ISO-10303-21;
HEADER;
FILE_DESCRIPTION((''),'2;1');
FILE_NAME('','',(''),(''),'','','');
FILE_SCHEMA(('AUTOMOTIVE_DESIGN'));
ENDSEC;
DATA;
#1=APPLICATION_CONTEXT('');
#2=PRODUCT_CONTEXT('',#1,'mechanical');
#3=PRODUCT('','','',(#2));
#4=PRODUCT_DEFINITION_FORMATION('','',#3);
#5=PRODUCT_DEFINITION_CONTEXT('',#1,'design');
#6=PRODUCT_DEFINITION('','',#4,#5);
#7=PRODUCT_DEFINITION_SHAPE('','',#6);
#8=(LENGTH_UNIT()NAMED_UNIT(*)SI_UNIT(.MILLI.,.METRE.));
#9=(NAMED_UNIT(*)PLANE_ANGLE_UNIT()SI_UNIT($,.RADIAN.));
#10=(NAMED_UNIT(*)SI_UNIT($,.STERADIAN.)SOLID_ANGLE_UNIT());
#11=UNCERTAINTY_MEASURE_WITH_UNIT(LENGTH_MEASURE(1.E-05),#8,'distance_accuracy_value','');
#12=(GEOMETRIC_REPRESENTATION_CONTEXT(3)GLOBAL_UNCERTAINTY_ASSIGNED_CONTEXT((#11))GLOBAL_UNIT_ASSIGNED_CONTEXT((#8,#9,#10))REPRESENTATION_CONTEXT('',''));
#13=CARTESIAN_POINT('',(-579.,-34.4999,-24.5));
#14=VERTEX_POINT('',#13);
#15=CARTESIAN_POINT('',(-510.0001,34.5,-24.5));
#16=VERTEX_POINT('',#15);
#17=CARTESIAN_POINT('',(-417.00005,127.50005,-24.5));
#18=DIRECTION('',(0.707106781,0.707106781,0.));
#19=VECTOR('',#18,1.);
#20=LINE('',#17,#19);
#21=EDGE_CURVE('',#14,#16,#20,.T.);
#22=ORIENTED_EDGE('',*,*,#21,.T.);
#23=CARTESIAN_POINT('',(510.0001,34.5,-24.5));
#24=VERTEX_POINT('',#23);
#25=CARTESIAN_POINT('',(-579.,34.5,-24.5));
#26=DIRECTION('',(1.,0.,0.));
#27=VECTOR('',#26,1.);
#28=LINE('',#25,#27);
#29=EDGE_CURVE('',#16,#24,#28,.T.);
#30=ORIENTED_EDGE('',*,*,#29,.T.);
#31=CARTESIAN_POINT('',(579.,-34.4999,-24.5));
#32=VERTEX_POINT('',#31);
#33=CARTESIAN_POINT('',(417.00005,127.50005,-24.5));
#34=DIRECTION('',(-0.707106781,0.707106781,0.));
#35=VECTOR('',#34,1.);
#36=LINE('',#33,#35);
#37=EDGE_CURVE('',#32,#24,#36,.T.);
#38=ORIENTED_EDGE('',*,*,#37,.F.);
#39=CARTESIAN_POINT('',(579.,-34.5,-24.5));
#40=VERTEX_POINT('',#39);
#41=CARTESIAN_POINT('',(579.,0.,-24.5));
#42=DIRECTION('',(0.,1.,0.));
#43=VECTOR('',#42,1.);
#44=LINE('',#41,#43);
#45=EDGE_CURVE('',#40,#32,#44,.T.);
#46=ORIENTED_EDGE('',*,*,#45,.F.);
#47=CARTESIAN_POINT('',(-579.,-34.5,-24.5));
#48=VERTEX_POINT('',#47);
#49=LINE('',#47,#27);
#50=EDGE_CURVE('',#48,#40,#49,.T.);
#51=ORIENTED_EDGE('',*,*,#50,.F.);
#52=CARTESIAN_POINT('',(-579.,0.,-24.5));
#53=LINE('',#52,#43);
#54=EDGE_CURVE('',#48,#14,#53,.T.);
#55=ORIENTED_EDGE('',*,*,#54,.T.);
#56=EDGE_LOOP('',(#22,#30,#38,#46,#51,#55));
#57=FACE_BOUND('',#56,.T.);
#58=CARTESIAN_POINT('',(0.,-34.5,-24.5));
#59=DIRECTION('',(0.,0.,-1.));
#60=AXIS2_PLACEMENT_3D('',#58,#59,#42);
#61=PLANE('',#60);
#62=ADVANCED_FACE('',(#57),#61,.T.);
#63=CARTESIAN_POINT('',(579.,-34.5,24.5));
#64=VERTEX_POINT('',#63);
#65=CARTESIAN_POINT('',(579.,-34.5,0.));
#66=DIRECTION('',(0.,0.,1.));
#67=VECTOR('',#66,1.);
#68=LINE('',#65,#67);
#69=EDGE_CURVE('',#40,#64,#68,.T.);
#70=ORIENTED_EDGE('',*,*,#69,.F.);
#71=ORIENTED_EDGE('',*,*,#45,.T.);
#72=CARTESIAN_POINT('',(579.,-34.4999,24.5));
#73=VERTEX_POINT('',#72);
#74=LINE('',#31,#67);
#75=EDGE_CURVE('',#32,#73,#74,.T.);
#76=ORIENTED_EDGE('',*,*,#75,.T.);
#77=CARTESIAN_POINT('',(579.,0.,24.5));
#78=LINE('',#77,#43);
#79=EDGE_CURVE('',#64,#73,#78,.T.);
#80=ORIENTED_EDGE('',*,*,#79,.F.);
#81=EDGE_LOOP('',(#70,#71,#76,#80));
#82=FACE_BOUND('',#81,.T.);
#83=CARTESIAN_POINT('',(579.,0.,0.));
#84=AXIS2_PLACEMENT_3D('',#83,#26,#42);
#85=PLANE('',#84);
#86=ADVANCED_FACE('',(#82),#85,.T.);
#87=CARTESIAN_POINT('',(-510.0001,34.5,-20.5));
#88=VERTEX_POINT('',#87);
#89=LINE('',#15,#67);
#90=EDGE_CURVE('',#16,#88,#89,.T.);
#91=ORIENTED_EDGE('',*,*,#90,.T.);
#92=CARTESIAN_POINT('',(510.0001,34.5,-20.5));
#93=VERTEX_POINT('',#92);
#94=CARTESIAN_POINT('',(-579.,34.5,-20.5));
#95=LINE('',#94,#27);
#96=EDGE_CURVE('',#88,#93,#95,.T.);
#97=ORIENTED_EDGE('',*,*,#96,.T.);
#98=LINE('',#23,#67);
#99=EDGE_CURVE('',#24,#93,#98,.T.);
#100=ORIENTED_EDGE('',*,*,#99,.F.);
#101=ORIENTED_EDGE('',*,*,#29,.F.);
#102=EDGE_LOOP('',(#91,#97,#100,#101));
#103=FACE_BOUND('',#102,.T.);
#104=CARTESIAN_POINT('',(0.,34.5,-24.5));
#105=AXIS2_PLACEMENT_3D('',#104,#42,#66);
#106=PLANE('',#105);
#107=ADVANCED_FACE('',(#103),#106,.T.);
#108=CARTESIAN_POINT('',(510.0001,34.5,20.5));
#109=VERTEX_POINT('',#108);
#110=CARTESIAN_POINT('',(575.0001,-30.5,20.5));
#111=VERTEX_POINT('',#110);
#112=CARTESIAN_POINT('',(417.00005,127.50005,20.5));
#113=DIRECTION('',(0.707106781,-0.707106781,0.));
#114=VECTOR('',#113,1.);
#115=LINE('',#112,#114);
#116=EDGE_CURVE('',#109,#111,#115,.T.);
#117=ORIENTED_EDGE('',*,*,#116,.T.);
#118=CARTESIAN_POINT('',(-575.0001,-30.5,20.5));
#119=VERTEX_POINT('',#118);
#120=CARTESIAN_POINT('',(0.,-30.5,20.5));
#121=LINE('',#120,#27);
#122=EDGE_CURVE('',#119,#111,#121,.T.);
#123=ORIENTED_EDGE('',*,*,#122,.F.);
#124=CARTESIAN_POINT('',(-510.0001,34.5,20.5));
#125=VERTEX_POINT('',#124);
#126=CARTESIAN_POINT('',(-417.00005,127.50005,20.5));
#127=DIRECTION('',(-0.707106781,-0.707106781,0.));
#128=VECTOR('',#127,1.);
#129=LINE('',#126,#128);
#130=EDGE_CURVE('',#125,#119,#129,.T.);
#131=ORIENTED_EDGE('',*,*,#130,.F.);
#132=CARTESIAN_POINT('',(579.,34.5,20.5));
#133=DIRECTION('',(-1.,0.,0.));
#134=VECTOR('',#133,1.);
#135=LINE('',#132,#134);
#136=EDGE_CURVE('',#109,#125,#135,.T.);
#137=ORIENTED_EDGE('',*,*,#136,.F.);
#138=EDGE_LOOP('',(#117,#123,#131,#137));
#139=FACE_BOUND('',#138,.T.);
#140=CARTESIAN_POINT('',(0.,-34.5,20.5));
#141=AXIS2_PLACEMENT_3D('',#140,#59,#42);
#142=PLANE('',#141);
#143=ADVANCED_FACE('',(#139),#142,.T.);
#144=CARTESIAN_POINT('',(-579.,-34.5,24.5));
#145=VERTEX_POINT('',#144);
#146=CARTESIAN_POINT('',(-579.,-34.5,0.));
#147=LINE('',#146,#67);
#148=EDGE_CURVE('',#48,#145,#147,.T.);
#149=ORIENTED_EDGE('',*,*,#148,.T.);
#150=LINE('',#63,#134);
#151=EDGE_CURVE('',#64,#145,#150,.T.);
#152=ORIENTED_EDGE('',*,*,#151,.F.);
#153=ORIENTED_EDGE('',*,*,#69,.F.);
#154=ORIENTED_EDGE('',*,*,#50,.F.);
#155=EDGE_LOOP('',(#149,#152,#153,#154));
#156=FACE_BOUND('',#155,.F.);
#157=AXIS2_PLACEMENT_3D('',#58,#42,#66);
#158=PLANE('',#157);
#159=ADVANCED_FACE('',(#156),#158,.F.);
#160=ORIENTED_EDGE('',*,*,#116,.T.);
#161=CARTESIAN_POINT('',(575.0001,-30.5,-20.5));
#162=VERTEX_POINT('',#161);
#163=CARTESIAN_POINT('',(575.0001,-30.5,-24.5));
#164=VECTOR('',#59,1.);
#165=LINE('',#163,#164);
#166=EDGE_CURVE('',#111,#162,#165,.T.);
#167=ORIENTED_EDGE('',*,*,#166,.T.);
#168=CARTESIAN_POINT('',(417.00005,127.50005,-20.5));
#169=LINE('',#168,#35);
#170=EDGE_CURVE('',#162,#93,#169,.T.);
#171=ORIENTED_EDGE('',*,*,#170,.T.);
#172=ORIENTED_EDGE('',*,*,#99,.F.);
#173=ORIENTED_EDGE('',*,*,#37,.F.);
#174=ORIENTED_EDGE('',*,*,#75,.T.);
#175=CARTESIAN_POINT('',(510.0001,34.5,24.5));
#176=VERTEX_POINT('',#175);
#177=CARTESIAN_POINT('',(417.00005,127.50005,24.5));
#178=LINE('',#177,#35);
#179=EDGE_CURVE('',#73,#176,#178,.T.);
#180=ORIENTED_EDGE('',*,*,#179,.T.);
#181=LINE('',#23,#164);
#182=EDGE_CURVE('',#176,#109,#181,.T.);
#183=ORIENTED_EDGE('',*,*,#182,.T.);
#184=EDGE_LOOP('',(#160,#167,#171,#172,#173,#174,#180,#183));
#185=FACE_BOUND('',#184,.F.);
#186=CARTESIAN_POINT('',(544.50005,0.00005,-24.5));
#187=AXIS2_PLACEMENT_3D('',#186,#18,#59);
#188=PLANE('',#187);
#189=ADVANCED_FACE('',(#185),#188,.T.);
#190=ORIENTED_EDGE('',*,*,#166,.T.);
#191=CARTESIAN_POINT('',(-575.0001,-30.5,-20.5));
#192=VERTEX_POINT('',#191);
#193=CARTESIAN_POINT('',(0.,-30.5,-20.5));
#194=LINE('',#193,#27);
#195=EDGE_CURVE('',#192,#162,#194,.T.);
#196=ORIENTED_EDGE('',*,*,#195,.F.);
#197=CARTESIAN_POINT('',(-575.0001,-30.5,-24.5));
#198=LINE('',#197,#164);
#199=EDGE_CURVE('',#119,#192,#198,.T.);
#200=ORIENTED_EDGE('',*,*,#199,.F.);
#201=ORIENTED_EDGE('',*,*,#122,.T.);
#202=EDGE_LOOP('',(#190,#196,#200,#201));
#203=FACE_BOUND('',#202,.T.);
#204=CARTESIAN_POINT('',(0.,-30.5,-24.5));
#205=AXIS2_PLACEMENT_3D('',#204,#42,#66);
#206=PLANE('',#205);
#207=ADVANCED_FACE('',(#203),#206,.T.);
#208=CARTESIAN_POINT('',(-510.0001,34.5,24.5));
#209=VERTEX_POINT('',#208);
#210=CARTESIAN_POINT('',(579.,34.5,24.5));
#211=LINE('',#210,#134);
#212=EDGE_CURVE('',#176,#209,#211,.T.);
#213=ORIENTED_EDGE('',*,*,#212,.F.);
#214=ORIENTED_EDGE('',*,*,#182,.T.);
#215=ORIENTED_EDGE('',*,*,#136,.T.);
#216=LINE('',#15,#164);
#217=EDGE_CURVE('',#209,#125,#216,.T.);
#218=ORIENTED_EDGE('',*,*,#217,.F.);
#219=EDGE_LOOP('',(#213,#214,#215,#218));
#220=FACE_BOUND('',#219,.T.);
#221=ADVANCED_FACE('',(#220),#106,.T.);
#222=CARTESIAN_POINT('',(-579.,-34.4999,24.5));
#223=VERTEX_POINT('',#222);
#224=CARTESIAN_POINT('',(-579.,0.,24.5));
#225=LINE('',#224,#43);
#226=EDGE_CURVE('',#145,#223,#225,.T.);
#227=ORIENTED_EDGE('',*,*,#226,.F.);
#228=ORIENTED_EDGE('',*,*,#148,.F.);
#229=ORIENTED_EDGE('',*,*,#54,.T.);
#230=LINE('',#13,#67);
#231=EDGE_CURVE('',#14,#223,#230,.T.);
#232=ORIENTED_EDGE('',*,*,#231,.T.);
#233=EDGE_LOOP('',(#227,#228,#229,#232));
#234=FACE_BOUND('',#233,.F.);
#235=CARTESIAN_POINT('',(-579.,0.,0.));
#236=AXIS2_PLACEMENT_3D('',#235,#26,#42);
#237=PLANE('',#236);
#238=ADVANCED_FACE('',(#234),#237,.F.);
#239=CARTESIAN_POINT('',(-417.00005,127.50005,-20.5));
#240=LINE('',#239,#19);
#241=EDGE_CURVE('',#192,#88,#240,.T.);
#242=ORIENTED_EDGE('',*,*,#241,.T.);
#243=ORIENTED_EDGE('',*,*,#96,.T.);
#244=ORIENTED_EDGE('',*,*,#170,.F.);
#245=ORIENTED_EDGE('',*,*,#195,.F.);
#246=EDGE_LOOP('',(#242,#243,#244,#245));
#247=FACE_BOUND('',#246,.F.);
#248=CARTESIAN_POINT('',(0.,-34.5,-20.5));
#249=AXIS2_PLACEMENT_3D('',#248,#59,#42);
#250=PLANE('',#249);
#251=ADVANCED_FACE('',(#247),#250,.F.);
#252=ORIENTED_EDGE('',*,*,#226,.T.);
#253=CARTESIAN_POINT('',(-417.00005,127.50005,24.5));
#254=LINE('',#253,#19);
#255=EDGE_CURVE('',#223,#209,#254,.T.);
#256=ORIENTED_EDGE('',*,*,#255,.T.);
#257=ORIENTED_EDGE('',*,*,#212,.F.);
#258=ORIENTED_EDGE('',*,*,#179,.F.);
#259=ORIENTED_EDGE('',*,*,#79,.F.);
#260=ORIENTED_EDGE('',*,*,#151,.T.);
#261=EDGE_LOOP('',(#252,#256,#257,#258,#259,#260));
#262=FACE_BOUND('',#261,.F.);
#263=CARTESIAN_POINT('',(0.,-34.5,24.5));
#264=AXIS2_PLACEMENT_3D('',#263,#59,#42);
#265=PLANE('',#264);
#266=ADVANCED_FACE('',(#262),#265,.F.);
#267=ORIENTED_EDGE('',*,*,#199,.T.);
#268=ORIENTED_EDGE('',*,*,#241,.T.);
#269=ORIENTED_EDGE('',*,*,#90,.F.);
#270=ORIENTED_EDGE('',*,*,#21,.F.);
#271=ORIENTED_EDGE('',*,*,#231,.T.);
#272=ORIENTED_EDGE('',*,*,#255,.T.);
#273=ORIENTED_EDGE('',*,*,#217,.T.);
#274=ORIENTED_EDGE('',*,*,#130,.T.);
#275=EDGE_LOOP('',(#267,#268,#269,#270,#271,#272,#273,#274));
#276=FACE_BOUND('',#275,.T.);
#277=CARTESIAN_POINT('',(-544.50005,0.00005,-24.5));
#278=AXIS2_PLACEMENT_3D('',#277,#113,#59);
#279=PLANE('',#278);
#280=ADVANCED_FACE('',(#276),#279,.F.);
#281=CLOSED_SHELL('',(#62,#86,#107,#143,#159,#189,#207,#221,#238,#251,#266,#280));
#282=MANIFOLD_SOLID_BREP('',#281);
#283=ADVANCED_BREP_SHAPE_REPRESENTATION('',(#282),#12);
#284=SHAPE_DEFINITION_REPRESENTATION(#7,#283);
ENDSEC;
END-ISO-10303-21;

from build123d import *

# Parameters (mm, degrees)
F0_W       = 69
F0_H       = 49
F1_DEPTH   = 579
F2_T       = -4
F3_C1_SIZE = 68.9999
F3_C2_SIZE = 68.9999


# Not quite as in the source:
# - a fillet or chamfer is up to 0.001 mm smaller than in the source, because OpenCascade refuses the exact size


with BuildPart() as f1:
    # F0 (on Right) → F1 (new body, symmetric)
    with BuildSketch(Plane.YZ):
        Rectangle(F0_W, F0_H)
    extrude(amount=F1_DEPTH, both=True)

    # F2
    f2_openings = [f1.faces().sort_by_distance(p)[0] for p in [
        (579, 0, 0),
        (0, 34.5, 0),
        (-579, 0, 0),
    ]]
    offset(amount=F2_T, openings=f2_openings)

    # F3: chamfer of 69 on 4 edges, made by hand

    # F3_c1 (size 69 in the source; OpenCascade refuses exactly that, so slightly less here)
    f3_c1_edges = [f1.edges().sort_by_distance(p)[0] for p in [
        (579, 34.5, -22.5),
    ]]
    chamfer(f3_c1_edges, length=F3_C1_SIZE)

    # F3_c2 (size 69 in the source; OpenCascade refuses exactly that, so slightly less here)
    f3_c2_edges = [f1.edges().sort_by_distance(p)[0] for p in [
        (-579, 34.5, -22.5),
    ]]
    chamfer(f3_c2_edges, length=F3_C2_SIZE)


solid = f1.part
